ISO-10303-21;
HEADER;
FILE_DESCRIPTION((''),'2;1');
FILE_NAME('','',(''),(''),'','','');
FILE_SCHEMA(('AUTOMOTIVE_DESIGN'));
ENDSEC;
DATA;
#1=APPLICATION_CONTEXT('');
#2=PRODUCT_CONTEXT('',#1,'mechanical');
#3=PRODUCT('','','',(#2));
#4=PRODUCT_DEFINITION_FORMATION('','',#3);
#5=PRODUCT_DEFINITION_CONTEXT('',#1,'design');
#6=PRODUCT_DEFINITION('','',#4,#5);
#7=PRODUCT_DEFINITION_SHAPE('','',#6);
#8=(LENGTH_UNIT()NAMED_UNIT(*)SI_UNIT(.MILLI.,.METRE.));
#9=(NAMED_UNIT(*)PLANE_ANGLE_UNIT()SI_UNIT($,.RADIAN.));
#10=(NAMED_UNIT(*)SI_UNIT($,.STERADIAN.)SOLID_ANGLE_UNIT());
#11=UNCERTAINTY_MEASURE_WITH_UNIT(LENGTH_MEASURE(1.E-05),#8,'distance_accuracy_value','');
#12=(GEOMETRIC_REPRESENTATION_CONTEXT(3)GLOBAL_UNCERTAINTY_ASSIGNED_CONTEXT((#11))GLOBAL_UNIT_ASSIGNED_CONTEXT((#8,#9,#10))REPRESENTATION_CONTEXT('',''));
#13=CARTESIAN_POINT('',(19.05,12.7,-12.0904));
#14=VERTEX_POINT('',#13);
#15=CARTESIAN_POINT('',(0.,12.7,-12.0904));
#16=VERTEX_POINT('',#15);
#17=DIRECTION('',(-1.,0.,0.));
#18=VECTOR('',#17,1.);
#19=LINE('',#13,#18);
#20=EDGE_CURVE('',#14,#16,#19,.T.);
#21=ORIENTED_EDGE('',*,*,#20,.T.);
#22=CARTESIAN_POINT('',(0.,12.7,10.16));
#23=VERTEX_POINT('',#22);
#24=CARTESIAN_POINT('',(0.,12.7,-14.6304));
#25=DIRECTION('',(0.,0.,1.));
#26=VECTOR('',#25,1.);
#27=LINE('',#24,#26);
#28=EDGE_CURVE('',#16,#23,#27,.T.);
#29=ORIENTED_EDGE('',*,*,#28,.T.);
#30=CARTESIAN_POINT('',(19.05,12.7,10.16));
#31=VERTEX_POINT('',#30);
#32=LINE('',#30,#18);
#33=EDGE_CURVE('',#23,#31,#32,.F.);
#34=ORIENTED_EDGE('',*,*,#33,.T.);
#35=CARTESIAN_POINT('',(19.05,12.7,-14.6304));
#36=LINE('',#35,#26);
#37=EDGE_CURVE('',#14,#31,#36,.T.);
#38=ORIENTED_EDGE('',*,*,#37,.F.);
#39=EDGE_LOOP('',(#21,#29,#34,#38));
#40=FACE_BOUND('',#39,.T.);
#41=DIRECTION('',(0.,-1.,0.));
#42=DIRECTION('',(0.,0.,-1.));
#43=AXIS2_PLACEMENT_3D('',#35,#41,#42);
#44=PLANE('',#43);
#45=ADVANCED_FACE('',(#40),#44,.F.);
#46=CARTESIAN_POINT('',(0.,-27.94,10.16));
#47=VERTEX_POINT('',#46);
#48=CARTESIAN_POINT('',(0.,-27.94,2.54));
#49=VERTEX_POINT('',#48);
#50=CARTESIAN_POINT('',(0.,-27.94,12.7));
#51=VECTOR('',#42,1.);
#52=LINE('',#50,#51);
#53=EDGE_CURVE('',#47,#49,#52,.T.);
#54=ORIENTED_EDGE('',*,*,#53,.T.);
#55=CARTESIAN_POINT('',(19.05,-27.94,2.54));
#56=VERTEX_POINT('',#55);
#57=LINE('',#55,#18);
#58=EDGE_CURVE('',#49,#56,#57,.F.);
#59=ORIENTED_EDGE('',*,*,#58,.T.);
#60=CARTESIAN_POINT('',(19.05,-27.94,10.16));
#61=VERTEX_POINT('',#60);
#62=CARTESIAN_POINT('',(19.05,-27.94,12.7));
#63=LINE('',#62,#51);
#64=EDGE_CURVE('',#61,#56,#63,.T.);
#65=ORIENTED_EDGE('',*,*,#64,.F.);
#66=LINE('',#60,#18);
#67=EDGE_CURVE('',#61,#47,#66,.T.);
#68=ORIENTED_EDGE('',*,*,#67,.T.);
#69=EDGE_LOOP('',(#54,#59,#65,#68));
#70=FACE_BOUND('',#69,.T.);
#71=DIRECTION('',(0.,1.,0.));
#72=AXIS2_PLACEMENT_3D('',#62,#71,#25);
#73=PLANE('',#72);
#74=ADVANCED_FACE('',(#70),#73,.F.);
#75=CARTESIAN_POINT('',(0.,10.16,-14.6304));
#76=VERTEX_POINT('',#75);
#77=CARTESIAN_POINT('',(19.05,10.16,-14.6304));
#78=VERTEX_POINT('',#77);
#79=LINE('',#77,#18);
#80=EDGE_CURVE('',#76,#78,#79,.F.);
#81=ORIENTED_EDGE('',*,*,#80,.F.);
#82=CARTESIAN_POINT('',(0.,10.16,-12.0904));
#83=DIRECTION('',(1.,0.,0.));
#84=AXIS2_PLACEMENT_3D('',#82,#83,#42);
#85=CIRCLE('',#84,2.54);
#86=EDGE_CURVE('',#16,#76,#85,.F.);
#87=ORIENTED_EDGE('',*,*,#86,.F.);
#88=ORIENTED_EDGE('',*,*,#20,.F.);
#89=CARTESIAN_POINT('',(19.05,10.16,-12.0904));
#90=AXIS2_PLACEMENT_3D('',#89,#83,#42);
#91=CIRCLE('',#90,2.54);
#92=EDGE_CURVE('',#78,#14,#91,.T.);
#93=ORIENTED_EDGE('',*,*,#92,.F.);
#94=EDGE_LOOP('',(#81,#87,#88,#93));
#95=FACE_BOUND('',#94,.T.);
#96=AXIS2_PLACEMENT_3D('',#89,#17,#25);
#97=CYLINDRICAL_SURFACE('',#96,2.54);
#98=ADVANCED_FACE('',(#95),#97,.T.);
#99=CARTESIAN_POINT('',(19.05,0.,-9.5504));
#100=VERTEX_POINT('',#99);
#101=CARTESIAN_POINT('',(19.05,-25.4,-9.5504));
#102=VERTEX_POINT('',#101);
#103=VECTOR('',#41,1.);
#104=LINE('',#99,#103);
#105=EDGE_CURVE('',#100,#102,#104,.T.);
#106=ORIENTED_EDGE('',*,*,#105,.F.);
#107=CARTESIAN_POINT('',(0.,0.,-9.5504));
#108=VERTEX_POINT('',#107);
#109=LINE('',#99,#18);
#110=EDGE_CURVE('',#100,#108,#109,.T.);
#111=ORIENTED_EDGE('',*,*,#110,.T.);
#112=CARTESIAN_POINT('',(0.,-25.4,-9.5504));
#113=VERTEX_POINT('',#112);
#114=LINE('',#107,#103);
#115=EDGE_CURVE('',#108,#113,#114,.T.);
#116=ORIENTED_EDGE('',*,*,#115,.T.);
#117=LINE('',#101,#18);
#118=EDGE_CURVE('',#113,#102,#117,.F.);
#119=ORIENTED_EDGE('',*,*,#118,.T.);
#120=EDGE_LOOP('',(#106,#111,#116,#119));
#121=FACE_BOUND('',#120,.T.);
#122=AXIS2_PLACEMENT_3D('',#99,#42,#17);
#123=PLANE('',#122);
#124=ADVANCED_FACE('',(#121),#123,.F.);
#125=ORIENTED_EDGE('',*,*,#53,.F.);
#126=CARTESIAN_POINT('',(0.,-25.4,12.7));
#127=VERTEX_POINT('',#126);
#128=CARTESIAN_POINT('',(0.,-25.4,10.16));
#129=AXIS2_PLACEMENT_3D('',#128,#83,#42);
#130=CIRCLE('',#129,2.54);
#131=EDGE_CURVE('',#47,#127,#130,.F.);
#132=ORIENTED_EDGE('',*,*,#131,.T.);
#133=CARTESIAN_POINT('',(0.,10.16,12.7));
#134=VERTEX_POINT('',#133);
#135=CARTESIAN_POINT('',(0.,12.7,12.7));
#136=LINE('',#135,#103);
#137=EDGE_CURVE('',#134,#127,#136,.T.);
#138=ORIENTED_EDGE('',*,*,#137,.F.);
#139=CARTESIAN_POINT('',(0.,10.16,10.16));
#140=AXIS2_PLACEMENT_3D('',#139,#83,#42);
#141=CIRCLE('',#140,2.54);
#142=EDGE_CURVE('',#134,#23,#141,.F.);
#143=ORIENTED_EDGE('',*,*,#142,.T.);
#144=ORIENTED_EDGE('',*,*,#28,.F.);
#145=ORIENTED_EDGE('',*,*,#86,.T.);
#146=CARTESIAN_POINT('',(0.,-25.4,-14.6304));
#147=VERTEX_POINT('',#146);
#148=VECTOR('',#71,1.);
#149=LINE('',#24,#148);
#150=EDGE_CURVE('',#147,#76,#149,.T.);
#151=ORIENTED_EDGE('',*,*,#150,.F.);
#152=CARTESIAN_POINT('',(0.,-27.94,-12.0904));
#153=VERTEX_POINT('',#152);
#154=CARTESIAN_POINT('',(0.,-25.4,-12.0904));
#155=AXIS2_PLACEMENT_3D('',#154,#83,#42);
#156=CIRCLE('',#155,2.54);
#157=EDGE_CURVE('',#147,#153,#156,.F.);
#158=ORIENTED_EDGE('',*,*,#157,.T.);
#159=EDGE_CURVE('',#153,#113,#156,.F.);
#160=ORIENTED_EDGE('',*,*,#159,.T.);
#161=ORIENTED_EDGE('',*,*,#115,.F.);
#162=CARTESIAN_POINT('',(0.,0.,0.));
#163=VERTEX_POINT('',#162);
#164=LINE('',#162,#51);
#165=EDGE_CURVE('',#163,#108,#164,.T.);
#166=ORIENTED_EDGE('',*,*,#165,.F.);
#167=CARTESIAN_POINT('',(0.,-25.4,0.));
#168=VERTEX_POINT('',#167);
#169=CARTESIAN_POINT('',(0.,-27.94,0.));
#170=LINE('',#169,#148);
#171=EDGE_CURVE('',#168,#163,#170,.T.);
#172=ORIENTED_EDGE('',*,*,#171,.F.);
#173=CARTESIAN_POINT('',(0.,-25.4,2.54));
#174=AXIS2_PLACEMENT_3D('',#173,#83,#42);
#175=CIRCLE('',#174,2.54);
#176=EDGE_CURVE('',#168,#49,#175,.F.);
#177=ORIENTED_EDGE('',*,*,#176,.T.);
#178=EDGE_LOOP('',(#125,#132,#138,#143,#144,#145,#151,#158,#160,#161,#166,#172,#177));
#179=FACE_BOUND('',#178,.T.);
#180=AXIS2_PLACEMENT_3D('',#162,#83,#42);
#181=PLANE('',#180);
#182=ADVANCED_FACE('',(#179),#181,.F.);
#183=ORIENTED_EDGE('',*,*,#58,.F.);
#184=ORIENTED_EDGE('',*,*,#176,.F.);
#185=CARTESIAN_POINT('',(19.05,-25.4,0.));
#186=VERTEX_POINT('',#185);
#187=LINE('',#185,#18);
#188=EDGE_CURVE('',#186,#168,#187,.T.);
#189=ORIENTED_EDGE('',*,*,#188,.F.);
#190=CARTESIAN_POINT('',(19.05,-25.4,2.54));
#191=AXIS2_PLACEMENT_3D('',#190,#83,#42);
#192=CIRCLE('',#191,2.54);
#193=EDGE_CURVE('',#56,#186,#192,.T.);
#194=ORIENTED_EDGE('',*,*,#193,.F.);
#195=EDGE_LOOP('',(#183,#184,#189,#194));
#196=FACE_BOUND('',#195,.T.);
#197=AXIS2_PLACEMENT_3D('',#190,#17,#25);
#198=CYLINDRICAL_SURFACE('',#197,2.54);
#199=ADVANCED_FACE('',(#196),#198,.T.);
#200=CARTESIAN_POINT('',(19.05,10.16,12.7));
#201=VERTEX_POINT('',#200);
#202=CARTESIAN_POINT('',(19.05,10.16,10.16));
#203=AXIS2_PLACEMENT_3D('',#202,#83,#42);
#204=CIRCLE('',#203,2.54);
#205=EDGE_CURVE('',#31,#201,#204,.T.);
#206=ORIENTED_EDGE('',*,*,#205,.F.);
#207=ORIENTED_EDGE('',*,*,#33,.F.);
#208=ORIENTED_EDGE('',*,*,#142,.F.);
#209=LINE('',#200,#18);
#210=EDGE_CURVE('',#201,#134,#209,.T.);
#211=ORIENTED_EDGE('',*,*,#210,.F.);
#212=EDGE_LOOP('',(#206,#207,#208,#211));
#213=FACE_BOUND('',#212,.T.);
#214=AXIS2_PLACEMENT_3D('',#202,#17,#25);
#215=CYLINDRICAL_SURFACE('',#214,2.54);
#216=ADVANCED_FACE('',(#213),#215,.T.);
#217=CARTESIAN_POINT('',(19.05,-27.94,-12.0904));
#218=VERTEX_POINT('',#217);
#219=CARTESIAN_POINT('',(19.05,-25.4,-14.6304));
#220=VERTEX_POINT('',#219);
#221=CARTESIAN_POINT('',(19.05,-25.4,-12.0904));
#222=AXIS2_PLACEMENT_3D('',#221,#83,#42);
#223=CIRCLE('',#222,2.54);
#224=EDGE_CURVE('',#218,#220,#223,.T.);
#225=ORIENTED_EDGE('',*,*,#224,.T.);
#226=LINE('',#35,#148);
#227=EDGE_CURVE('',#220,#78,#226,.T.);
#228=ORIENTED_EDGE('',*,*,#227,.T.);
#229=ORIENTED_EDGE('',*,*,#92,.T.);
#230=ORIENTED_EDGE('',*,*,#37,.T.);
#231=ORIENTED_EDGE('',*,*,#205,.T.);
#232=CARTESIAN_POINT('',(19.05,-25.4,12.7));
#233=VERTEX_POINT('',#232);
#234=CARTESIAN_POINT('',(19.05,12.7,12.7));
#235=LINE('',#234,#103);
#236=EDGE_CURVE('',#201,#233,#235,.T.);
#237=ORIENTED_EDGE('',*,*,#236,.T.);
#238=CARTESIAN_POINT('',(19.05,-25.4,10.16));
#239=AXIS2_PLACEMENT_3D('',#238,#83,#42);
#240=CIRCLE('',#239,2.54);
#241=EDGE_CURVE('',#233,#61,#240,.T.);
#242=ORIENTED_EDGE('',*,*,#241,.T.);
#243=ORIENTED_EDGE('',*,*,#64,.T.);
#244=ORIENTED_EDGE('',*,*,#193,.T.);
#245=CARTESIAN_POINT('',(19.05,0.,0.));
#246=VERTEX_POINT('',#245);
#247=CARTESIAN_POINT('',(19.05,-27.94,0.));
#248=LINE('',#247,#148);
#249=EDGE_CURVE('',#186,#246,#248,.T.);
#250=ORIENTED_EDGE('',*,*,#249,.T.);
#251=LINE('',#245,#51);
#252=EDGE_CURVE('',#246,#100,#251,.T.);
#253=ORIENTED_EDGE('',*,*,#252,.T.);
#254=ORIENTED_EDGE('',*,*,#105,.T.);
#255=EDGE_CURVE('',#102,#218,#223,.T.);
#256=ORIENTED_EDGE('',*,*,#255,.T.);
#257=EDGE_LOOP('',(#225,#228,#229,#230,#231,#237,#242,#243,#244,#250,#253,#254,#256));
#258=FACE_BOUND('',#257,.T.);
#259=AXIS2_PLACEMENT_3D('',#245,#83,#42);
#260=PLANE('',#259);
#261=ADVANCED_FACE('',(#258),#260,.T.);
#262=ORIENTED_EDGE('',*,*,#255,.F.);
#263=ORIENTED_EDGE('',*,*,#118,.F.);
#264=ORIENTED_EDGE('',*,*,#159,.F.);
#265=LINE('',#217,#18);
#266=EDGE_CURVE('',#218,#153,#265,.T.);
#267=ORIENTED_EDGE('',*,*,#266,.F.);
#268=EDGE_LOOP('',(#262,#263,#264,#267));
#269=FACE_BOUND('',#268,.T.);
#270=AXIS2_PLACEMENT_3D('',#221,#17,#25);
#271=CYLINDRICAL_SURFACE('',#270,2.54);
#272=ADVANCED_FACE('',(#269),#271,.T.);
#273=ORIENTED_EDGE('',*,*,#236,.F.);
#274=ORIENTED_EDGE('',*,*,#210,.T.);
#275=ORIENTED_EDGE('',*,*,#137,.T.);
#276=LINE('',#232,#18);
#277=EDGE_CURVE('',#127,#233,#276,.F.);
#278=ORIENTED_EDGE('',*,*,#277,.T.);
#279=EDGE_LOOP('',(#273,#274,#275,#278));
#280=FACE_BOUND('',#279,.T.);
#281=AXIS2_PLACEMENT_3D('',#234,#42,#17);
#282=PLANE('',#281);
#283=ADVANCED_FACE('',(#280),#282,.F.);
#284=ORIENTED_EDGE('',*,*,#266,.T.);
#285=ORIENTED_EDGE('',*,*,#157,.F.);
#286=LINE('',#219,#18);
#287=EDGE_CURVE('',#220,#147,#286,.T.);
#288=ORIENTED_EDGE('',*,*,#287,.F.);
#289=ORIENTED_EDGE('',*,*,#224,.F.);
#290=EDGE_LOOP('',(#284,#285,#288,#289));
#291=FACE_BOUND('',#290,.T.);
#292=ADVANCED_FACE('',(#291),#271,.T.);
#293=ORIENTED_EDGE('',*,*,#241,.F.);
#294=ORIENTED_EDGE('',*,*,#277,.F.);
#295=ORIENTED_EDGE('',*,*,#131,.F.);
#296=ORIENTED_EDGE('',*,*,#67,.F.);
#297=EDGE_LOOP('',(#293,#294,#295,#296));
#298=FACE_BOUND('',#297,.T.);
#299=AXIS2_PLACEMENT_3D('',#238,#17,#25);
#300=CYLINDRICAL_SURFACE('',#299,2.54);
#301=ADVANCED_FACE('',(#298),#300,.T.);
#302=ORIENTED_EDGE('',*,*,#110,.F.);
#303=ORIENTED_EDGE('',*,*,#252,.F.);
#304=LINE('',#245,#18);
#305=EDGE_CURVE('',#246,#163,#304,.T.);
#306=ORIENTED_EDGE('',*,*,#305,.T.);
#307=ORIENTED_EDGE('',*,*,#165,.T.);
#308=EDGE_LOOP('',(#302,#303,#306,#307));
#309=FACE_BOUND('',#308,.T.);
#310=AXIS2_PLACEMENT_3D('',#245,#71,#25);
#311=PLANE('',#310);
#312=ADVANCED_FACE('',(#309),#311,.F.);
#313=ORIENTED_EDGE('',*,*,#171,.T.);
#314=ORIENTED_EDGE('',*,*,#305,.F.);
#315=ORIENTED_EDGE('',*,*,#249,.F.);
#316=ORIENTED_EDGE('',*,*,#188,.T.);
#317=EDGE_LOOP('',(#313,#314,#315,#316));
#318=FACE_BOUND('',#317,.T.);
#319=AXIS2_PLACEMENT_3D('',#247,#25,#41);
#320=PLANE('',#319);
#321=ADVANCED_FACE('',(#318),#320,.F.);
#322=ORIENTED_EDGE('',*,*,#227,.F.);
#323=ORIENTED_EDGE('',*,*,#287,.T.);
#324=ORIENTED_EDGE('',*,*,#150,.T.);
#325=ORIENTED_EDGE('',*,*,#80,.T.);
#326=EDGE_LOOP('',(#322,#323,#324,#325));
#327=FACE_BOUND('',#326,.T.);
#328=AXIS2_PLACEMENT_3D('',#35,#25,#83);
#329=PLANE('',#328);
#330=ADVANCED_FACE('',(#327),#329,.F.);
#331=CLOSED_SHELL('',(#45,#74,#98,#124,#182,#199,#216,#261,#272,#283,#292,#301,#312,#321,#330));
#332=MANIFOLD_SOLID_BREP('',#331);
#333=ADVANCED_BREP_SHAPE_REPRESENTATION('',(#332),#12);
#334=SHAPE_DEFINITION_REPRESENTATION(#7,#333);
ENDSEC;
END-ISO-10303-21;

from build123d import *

# Parameters (mm, degrees)
BOSS_EXTRUDE1_DEPTH = 19.05
FILLET3_R           = 2.54


with BuildPart() as part:
    # Sketch1 → Boss-Extrude1 (new body)
    with BuildSketch(Plane(origin=(0, 0, 0), x_dir=(0, 0, -1), z_dir=(1, 0, 0))):
        Polygon((0, -27.94), (0, 0), (9.5504, 0), (9.5504, -27.94), (14.6304, -27.94), (14.6304, 12.7), (-12.7, 12.7), (-12.7, -27.94), align=None)
    extrude(amount=BOSS_EXTRUDE1_DEPTH)

    # Fillet3
    fillet3_edges = [part.edges().sort_by_distance(p)[0] for p in [
        (9.525, -27.94, 12.7),
        (9.525, 12.7, 12.7),
        (9.525, 12.7, -14.6304),
        (9.525, -27.94, -14.6304),
        (9.525, -27.94, -9.5504),
        (9.525, -27.94, 0),
    ]]
    fillet(fillet3_edges, radius=FILLET3_R - 0.0001)  # a hair under: the kernel refuses the full size


solid = part.part
